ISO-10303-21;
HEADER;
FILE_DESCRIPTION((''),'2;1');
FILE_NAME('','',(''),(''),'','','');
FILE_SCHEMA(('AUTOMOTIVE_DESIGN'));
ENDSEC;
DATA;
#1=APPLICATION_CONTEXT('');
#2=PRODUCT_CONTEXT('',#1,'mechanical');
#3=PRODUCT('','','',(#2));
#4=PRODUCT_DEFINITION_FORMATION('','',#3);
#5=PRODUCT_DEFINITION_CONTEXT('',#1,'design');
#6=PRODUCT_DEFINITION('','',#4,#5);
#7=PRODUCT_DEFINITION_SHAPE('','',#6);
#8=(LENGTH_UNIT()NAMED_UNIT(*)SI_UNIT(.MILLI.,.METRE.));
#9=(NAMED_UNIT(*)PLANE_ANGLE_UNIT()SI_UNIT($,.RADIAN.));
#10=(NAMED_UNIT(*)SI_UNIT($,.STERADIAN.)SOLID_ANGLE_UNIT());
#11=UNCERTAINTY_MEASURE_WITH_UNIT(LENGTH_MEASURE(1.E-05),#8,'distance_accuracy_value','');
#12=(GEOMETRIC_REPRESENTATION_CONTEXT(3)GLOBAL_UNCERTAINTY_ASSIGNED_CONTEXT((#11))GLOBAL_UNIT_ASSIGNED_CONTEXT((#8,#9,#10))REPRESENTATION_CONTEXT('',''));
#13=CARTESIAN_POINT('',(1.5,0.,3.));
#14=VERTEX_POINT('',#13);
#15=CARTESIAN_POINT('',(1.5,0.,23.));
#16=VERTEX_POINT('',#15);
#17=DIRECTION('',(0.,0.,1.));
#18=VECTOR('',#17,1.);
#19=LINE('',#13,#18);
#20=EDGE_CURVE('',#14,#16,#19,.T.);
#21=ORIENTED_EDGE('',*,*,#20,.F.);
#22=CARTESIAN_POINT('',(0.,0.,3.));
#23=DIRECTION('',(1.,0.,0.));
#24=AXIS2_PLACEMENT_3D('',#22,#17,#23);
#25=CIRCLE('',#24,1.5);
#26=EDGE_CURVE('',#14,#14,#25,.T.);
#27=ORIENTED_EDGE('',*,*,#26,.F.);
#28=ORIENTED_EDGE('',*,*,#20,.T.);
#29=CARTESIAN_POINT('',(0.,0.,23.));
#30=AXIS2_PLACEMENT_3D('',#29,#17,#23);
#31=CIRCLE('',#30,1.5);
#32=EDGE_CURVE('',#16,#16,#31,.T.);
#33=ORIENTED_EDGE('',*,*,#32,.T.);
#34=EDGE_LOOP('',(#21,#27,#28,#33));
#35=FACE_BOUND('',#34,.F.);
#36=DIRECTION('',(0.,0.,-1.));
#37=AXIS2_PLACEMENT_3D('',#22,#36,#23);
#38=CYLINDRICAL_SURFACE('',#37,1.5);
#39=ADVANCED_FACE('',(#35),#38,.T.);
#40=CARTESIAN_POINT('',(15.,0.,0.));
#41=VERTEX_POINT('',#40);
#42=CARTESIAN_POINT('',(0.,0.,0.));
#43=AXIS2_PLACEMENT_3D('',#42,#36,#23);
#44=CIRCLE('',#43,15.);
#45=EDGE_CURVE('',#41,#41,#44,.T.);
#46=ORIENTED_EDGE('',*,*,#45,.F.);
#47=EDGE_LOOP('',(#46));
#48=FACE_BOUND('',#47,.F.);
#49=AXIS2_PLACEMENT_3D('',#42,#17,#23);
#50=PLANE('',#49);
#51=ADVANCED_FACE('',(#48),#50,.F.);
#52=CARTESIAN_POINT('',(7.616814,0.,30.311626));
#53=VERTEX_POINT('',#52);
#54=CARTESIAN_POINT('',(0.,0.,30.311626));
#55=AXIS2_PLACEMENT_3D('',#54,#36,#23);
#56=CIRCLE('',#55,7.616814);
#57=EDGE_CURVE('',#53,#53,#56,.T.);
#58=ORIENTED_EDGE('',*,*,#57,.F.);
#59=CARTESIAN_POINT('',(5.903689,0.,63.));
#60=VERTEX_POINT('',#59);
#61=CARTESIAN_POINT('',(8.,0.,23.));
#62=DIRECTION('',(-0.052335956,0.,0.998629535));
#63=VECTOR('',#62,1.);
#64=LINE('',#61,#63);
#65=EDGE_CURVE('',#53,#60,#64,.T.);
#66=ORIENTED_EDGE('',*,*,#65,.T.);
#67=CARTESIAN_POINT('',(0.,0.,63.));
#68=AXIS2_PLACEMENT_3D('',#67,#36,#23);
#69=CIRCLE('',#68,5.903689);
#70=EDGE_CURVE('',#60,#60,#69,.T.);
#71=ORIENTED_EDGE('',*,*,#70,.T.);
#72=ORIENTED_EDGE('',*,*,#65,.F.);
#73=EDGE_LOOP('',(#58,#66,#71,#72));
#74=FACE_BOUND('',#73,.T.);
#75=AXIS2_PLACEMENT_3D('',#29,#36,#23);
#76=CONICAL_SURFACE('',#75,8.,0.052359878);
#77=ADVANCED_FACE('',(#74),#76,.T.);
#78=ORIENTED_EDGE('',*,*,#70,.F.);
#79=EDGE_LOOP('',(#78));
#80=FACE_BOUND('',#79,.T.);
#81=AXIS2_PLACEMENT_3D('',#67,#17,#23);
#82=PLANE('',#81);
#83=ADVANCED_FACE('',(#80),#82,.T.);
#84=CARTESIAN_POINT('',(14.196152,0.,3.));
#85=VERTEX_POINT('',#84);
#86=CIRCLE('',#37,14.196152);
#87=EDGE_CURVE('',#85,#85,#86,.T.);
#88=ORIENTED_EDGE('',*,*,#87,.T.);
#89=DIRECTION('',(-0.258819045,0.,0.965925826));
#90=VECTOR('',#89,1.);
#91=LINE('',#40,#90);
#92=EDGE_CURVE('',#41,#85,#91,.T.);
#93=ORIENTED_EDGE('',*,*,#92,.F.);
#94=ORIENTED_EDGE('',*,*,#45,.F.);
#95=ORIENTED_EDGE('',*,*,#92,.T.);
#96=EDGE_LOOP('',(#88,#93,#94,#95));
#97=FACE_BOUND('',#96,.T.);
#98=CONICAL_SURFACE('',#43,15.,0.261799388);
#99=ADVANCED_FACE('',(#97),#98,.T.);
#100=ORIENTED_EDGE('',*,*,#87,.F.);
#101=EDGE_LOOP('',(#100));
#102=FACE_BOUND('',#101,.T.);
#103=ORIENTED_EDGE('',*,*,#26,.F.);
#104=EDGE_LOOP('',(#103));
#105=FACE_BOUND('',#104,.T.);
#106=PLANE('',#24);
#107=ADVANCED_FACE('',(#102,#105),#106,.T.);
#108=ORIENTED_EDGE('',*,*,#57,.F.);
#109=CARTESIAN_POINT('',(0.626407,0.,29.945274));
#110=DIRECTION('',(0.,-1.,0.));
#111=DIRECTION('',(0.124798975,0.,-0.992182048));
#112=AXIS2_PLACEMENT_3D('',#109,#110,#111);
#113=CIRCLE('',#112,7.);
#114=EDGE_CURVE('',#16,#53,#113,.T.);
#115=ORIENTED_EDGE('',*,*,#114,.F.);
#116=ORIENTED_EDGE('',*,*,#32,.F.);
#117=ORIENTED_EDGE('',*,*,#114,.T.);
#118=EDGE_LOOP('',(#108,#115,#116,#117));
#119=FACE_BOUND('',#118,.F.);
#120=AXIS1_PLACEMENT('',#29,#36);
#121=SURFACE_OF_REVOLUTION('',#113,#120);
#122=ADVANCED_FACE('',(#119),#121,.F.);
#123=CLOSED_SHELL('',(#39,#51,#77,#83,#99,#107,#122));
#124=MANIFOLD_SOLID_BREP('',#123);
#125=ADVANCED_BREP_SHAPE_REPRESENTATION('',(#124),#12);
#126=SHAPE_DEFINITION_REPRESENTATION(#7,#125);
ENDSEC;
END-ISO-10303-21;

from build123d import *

# Parameters (mm, degrees)
F0_R     = 15
F1_DEPTH = 3
F1_TAPER = 15
F2_R     = 1.5
F3_DEPTH = 20
F4_R     = 8
F5_DEPTH = 40
F5_TAPER = 3


# Not quite as in the source:
# - a fillet or chamfer that OpenCascade refuses, or shapes differently, is made with other operations: its cross-section is extruded or revolved along the edge and cut away or added


with BuildPart() as f1:
    # F0 (on Top) → F1 (new body)
    with BuildSketch(Plane.XY):
        Circle(F0_R)
    extrude(amount=F1_DEPTH, taper=F1_TAPER)

    # F2 (on face) → F3 (join)
    with BuildSketch(Plane.XY.offset(3)):
        Circle(F2_R)
    extrude(amount=F3_DEPTH)

    # F4 (on face) → F5 (join)
    with BuildSketch(Plane.XY.offset(23)):
        Circle(F4_R)
    extrude(amount=F5_DEPTH, taper=F5_TAPER)

    # F6: fillet of radius 7 on 1 edges, made by hand

    # F6_s1 → F6_t2 (revolve, cut)
    with BuildSketch(Plane.XZ):
        with BuildLine():
            ThreePointArc((1.5, 23), (5.9953541002, 25.4536811979), (7.6168139169, 30.3116260276))
            Line((7.6168139169, 30.3116260276), (8, 23))
            Line((8, 23), (1.5, 23))
        make_face()
    revolve(axis=Axis((0, 0, 23), (0, 0, -1)), mode=Mode.SUBTRACT)


solid = f1.part
